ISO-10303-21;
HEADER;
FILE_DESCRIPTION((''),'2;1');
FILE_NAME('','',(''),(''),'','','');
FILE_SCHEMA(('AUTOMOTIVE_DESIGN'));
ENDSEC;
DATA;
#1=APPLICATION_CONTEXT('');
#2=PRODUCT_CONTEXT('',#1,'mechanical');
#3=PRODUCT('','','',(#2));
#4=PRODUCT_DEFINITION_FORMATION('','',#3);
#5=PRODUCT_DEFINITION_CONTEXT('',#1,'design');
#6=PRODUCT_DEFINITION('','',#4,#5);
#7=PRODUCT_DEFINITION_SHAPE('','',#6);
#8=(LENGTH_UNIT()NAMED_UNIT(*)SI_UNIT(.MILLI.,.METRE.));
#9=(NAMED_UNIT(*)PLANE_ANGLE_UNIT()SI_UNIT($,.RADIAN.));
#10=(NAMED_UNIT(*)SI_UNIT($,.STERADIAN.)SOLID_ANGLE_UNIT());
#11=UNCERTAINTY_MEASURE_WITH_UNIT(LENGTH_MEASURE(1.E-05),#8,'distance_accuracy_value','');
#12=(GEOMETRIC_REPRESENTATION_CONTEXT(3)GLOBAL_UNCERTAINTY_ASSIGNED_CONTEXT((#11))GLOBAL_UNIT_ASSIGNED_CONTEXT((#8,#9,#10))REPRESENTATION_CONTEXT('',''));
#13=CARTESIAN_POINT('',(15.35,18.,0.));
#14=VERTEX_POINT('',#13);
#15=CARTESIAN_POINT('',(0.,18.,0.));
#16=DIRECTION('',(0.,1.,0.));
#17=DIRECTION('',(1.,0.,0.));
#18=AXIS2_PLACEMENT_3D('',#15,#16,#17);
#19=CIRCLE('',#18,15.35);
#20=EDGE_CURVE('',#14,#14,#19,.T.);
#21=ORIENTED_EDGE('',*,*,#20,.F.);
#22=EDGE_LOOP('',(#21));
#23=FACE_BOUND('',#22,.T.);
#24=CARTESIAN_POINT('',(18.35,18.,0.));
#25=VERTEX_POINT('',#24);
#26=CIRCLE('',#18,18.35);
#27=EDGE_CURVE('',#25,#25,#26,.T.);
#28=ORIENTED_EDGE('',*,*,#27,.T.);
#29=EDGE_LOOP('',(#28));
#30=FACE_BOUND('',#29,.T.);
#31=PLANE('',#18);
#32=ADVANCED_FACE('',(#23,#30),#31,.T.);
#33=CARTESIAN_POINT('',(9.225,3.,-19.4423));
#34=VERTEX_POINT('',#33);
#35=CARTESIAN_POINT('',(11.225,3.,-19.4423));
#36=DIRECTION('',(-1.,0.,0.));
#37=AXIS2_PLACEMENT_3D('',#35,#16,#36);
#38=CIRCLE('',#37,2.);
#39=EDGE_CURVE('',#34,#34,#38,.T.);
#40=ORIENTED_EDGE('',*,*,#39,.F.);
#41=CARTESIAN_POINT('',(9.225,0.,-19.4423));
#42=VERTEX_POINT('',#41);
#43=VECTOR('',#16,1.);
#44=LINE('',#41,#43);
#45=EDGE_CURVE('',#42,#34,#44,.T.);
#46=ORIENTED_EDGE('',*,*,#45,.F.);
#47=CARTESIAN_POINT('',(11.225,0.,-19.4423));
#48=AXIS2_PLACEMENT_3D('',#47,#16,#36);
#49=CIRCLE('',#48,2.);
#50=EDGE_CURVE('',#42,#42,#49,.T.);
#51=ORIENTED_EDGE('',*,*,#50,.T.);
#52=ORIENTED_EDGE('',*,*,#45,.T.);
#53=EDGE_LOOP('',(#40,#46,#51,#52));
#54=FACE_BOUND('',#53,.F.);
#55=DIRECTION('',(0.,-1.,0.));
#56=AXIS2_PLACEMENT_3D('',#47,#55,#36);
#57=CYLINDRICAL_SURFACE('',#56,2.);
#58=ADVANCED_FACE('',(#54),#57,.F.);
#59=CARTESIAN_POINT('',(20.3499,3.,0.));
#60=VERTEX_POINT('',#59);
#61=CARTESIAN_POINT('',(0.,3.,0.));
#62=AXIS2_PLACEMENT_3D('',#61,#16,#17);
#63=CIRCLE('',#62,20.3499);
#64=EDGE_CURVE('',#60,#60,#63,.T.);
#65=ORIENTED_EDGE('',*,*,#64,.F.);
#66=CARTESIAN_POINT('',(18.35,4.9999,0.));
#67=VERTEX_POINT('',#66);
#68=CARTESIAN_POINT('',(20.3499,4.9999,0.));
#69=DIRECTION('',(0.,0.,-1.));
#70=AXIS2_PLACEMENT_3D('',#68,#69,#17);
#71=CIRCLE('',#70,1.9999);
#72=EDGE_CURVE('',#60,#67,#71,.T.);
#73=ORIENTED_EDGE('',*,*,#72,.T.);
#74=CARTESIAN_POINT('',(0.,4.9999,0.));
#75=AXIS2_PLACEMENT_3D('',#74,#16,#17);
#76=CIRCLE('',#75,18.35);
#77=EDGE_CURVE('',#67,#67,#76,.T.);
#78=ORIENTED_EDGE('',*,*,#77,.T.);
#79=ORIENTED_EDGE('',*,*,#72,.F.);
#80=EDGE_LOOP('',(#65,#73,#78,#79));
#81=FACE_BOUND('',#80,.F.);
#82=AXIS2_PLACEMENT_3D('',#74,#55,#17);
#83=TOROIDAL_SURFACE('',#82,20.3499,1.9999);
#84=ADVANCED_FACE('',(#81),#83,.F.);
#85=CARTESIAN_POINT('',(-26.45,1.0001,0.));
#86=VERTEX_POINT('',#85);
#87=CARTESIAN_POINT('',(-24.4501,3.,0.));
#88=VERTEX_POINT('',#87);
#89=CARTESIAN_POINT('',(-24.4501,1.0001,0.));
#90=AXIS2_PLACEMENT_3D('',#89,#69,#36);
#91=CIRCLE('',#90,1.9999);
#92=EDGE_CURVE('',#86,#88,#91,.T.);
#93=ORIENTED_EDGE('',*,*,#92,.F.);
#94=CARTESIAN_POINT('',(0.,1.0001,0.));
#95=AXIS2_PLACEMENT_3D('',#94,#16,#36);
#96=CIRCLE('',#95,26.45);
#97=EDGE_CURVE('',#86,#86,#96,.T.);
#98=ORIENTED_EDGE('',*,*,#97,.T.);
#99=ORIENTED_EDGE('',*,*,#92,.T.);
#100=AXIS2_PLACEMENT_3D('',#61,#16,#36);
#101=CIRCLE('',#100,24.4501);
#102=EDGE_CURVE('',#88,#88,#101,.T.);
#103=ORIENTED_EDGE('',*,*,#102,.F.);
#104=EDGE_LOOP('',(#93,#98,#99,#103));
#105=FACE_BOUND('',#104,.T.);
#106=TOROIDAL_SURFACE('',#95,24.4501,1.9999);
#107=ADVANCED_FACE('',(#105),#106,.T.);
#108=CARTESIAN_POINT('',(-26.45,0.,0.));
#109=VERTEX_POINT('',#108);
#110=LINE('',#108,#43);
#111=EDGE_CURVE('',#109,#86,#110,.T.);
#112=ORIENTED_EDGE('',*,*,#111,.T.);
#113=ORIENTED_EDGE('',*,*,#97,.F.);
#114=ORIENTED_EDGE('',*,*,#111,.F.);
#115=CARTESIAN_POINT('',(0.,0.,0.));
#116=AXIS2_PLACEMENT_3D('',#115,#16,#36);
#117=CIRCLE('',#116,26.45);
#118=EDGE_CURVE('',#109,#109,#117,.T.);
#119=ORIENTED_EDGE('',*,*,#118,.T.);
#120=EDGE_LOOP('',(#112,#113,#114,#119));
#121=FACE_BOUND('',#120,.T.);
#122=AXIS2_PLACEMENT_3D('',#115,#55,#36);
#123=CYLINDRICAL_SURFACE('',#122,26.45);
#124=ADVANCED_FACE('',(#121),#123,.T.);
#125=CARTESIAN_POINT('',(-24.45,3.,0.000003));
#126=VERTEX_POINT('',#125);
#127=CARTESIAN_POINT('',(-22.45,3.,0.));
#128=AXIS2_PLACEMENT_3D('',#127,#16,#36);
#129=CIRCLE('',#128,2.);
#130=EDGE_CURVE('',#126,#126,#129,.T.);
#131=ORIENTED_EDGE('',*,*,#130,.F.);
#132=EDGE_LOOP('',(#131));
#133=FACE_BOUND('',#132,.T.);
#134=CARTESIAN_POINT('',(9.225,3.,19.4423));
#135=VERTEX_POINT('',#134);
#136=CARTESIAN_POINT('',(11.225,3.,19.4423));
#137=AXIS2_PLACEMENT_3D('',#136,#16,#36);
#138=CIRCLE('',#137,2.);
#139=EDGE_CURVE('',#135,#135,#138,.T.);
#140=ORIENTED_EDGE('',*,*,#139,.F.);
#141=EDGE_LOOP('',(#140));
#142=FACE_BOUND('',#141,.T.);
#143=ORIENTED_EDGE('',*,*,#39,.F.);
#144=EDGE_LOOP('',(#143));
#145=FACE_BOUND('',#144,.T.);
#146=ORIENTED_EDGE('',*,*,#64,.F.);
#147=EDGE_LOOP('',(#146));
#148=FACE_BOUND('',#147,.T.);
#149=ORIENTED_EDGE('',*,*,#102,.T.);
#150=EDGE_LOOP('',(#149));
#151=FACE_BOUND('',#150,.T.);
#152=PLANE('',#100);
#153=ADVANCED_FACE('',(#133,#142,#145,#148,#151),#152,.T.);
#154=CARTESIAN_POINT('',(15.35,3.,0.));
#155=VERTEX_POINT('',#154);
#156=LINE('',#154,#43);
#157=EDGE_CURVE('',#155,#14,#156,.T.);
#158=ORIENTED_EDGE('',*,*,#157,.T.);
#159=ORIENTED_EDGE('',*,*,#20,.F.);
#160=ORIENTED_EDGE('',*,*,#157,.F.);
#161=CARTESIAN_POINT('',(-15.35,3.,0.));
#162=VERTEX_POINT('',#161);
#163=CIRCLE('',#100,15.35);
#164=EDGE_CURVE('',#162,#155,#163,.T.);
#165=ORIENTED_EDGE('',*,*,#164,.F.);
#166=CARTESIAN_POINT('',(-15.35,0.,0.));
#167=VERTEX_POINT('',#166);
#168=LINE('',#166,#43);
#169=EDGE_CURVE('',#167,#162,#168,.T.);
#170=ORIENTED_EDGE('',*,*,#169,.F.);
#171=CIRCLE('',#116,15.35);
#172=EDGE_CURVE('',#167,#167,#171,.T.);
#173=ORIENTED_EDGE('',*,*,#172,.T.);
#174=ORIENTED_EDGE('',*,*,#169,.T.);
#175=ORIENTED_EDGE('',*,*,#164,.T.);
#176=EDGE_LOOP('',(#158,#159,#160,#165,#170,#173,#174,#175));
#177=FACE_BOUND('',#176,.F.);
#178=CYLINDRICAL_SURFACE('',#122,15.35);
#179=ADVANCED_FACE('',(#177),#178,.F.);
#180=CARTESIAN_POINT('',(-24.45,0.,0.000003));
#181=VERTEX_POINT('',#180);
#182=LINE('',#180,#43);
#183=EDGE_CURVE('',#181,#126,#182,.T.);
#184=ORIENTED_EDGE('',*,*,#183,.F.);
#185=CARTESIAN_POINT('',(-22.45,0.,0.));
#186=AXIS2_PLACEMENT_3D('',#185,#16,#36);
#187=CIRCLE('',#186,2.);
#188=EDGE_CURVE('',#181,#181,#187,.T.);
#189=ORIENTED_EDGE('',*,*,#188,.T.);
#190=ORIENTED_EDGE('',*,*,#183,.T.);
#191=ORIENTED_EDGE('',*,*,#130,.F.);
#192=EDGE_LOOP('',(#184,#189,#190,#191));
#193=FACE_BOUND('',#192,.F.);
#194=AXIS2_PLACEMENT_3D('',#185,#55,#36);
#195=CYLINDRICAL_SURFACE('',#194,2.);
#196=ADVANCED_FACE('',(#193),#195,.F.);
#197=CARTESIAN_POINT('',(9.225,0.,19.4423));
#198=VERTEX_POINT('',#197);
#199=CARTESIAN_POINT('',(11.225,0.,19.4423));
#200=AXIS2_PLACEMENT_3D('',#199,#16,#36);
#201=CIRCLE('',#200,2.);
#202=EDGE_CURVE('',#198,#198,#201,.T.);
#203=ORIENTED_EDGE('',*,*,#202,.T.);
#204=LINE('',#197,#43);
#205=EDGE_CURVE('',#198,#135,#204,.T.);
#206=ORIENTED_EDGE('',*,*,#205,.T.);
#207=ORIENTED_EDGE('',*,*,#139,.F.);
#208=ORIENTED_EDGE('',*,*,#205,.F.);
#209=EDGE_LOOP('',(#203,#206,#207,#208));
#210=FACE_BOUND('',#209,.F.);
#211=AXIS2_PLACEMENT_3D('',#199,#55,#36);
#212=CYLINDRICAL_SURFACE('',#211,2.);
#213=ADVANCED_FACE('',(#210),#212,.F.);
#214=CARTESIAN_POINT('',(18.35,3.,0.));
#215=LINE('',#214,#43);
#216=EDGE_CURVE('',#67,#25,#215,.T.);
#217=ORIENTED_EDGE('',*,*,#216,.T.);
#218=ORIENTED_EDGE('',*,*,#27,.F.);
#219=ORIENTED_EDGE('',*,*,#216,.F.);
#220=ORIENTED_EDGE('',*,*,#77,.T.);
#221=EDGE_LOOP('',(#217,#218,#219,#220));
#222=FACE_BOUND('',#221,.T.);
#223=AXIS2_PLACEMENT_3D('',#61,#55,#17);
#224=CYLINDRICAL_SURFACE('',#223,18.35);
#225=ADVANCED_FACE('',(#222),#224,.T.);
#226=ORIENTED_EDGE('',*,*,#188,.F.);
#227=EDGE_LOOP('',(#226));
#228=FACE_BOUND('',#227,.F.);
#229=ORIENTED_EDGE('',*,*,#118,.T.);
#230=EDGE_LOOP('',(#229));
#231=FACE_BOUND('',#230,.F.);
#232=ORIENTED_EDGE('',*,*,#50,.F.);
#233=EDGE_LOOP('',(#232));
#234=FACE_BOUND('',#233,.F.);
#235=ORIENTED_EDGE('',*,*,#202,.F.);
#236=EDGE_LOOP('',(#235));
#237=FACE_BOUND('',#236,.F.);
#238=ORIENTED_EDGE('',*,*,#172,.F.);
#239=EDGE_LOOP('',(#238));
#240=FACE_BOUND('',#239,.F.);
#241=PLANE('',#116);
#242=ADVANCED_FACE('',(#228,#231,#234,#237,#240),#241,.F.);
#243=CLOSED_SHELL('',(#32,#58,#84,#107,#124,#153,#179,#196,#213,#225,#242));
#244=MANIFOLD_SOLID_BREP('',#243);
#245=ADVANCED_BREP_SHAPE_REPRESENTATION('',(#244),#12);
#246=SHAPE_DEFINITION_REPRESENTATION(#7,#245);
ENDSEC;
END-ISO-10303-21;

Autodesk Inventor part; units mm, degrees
ref_plane "YZ Plane" through (0, 0, 0) normal (1, 0, 0) x (0, 1, 0)
ref_plane "XZ Plane" through (0, 0, 0) normal (0, 1, 0) x (-1, 0, 0)
ref_plane "XY Plane" through (0, 0, 0) normal (0, 0, 1) x (1, 0, 0)
sketch "Sketch1" plane through (0, 0, 0) normal (0, 1, 0) x (-1, 0, 0)
  circle A0 centre (0, 0) radius 26.45
  circle A1 centre (22.45, 0) radius 2
  circle A2 centre (0, 0) radius 22.45 construction
  circle A3 centre (-11.225, 19.4423) radius 2
  circle A4 centre (-11.225, -19.4423) radius 2
  circle A5 centre (0, 0) radius 15.35
  dimension "d0" = 52.9
  dimension "d1" = 4
  dimension "d2" = 4
  dimension "d5" = 360
  dimension "d7" = 30.7
extrude "Extrusion1" add sketch "Sketch1" along normal blind 3
sketch "Sketch2" plane through (0, 3, 0) normal (0, 1, 0) x (1, 0, 0)
  circle A0 centre (0, 0) radius 15.35 projected
  circle A1 centre (11.225, 19.4423) radius 2 projected
  circle A2 centre (11.225, -19.4423) radius 2 projected
  circle A3 centre (-22.45, 0) radius 2 projected
  circle A4 centre (0, 0) radius 26.45 projected
  circle A5 centre (0, 0) radius 18.35
  dimension "d10" = 3
extrude "Extrusion2" add sketch "Sketch2" along normal blind 15 contours A5
fillet "Fillet1" radius 2 2 edges at (-18.35, 3, 0) (26.45, 3, 0)
properties part number "00_Zeiss_eyepieceport"
